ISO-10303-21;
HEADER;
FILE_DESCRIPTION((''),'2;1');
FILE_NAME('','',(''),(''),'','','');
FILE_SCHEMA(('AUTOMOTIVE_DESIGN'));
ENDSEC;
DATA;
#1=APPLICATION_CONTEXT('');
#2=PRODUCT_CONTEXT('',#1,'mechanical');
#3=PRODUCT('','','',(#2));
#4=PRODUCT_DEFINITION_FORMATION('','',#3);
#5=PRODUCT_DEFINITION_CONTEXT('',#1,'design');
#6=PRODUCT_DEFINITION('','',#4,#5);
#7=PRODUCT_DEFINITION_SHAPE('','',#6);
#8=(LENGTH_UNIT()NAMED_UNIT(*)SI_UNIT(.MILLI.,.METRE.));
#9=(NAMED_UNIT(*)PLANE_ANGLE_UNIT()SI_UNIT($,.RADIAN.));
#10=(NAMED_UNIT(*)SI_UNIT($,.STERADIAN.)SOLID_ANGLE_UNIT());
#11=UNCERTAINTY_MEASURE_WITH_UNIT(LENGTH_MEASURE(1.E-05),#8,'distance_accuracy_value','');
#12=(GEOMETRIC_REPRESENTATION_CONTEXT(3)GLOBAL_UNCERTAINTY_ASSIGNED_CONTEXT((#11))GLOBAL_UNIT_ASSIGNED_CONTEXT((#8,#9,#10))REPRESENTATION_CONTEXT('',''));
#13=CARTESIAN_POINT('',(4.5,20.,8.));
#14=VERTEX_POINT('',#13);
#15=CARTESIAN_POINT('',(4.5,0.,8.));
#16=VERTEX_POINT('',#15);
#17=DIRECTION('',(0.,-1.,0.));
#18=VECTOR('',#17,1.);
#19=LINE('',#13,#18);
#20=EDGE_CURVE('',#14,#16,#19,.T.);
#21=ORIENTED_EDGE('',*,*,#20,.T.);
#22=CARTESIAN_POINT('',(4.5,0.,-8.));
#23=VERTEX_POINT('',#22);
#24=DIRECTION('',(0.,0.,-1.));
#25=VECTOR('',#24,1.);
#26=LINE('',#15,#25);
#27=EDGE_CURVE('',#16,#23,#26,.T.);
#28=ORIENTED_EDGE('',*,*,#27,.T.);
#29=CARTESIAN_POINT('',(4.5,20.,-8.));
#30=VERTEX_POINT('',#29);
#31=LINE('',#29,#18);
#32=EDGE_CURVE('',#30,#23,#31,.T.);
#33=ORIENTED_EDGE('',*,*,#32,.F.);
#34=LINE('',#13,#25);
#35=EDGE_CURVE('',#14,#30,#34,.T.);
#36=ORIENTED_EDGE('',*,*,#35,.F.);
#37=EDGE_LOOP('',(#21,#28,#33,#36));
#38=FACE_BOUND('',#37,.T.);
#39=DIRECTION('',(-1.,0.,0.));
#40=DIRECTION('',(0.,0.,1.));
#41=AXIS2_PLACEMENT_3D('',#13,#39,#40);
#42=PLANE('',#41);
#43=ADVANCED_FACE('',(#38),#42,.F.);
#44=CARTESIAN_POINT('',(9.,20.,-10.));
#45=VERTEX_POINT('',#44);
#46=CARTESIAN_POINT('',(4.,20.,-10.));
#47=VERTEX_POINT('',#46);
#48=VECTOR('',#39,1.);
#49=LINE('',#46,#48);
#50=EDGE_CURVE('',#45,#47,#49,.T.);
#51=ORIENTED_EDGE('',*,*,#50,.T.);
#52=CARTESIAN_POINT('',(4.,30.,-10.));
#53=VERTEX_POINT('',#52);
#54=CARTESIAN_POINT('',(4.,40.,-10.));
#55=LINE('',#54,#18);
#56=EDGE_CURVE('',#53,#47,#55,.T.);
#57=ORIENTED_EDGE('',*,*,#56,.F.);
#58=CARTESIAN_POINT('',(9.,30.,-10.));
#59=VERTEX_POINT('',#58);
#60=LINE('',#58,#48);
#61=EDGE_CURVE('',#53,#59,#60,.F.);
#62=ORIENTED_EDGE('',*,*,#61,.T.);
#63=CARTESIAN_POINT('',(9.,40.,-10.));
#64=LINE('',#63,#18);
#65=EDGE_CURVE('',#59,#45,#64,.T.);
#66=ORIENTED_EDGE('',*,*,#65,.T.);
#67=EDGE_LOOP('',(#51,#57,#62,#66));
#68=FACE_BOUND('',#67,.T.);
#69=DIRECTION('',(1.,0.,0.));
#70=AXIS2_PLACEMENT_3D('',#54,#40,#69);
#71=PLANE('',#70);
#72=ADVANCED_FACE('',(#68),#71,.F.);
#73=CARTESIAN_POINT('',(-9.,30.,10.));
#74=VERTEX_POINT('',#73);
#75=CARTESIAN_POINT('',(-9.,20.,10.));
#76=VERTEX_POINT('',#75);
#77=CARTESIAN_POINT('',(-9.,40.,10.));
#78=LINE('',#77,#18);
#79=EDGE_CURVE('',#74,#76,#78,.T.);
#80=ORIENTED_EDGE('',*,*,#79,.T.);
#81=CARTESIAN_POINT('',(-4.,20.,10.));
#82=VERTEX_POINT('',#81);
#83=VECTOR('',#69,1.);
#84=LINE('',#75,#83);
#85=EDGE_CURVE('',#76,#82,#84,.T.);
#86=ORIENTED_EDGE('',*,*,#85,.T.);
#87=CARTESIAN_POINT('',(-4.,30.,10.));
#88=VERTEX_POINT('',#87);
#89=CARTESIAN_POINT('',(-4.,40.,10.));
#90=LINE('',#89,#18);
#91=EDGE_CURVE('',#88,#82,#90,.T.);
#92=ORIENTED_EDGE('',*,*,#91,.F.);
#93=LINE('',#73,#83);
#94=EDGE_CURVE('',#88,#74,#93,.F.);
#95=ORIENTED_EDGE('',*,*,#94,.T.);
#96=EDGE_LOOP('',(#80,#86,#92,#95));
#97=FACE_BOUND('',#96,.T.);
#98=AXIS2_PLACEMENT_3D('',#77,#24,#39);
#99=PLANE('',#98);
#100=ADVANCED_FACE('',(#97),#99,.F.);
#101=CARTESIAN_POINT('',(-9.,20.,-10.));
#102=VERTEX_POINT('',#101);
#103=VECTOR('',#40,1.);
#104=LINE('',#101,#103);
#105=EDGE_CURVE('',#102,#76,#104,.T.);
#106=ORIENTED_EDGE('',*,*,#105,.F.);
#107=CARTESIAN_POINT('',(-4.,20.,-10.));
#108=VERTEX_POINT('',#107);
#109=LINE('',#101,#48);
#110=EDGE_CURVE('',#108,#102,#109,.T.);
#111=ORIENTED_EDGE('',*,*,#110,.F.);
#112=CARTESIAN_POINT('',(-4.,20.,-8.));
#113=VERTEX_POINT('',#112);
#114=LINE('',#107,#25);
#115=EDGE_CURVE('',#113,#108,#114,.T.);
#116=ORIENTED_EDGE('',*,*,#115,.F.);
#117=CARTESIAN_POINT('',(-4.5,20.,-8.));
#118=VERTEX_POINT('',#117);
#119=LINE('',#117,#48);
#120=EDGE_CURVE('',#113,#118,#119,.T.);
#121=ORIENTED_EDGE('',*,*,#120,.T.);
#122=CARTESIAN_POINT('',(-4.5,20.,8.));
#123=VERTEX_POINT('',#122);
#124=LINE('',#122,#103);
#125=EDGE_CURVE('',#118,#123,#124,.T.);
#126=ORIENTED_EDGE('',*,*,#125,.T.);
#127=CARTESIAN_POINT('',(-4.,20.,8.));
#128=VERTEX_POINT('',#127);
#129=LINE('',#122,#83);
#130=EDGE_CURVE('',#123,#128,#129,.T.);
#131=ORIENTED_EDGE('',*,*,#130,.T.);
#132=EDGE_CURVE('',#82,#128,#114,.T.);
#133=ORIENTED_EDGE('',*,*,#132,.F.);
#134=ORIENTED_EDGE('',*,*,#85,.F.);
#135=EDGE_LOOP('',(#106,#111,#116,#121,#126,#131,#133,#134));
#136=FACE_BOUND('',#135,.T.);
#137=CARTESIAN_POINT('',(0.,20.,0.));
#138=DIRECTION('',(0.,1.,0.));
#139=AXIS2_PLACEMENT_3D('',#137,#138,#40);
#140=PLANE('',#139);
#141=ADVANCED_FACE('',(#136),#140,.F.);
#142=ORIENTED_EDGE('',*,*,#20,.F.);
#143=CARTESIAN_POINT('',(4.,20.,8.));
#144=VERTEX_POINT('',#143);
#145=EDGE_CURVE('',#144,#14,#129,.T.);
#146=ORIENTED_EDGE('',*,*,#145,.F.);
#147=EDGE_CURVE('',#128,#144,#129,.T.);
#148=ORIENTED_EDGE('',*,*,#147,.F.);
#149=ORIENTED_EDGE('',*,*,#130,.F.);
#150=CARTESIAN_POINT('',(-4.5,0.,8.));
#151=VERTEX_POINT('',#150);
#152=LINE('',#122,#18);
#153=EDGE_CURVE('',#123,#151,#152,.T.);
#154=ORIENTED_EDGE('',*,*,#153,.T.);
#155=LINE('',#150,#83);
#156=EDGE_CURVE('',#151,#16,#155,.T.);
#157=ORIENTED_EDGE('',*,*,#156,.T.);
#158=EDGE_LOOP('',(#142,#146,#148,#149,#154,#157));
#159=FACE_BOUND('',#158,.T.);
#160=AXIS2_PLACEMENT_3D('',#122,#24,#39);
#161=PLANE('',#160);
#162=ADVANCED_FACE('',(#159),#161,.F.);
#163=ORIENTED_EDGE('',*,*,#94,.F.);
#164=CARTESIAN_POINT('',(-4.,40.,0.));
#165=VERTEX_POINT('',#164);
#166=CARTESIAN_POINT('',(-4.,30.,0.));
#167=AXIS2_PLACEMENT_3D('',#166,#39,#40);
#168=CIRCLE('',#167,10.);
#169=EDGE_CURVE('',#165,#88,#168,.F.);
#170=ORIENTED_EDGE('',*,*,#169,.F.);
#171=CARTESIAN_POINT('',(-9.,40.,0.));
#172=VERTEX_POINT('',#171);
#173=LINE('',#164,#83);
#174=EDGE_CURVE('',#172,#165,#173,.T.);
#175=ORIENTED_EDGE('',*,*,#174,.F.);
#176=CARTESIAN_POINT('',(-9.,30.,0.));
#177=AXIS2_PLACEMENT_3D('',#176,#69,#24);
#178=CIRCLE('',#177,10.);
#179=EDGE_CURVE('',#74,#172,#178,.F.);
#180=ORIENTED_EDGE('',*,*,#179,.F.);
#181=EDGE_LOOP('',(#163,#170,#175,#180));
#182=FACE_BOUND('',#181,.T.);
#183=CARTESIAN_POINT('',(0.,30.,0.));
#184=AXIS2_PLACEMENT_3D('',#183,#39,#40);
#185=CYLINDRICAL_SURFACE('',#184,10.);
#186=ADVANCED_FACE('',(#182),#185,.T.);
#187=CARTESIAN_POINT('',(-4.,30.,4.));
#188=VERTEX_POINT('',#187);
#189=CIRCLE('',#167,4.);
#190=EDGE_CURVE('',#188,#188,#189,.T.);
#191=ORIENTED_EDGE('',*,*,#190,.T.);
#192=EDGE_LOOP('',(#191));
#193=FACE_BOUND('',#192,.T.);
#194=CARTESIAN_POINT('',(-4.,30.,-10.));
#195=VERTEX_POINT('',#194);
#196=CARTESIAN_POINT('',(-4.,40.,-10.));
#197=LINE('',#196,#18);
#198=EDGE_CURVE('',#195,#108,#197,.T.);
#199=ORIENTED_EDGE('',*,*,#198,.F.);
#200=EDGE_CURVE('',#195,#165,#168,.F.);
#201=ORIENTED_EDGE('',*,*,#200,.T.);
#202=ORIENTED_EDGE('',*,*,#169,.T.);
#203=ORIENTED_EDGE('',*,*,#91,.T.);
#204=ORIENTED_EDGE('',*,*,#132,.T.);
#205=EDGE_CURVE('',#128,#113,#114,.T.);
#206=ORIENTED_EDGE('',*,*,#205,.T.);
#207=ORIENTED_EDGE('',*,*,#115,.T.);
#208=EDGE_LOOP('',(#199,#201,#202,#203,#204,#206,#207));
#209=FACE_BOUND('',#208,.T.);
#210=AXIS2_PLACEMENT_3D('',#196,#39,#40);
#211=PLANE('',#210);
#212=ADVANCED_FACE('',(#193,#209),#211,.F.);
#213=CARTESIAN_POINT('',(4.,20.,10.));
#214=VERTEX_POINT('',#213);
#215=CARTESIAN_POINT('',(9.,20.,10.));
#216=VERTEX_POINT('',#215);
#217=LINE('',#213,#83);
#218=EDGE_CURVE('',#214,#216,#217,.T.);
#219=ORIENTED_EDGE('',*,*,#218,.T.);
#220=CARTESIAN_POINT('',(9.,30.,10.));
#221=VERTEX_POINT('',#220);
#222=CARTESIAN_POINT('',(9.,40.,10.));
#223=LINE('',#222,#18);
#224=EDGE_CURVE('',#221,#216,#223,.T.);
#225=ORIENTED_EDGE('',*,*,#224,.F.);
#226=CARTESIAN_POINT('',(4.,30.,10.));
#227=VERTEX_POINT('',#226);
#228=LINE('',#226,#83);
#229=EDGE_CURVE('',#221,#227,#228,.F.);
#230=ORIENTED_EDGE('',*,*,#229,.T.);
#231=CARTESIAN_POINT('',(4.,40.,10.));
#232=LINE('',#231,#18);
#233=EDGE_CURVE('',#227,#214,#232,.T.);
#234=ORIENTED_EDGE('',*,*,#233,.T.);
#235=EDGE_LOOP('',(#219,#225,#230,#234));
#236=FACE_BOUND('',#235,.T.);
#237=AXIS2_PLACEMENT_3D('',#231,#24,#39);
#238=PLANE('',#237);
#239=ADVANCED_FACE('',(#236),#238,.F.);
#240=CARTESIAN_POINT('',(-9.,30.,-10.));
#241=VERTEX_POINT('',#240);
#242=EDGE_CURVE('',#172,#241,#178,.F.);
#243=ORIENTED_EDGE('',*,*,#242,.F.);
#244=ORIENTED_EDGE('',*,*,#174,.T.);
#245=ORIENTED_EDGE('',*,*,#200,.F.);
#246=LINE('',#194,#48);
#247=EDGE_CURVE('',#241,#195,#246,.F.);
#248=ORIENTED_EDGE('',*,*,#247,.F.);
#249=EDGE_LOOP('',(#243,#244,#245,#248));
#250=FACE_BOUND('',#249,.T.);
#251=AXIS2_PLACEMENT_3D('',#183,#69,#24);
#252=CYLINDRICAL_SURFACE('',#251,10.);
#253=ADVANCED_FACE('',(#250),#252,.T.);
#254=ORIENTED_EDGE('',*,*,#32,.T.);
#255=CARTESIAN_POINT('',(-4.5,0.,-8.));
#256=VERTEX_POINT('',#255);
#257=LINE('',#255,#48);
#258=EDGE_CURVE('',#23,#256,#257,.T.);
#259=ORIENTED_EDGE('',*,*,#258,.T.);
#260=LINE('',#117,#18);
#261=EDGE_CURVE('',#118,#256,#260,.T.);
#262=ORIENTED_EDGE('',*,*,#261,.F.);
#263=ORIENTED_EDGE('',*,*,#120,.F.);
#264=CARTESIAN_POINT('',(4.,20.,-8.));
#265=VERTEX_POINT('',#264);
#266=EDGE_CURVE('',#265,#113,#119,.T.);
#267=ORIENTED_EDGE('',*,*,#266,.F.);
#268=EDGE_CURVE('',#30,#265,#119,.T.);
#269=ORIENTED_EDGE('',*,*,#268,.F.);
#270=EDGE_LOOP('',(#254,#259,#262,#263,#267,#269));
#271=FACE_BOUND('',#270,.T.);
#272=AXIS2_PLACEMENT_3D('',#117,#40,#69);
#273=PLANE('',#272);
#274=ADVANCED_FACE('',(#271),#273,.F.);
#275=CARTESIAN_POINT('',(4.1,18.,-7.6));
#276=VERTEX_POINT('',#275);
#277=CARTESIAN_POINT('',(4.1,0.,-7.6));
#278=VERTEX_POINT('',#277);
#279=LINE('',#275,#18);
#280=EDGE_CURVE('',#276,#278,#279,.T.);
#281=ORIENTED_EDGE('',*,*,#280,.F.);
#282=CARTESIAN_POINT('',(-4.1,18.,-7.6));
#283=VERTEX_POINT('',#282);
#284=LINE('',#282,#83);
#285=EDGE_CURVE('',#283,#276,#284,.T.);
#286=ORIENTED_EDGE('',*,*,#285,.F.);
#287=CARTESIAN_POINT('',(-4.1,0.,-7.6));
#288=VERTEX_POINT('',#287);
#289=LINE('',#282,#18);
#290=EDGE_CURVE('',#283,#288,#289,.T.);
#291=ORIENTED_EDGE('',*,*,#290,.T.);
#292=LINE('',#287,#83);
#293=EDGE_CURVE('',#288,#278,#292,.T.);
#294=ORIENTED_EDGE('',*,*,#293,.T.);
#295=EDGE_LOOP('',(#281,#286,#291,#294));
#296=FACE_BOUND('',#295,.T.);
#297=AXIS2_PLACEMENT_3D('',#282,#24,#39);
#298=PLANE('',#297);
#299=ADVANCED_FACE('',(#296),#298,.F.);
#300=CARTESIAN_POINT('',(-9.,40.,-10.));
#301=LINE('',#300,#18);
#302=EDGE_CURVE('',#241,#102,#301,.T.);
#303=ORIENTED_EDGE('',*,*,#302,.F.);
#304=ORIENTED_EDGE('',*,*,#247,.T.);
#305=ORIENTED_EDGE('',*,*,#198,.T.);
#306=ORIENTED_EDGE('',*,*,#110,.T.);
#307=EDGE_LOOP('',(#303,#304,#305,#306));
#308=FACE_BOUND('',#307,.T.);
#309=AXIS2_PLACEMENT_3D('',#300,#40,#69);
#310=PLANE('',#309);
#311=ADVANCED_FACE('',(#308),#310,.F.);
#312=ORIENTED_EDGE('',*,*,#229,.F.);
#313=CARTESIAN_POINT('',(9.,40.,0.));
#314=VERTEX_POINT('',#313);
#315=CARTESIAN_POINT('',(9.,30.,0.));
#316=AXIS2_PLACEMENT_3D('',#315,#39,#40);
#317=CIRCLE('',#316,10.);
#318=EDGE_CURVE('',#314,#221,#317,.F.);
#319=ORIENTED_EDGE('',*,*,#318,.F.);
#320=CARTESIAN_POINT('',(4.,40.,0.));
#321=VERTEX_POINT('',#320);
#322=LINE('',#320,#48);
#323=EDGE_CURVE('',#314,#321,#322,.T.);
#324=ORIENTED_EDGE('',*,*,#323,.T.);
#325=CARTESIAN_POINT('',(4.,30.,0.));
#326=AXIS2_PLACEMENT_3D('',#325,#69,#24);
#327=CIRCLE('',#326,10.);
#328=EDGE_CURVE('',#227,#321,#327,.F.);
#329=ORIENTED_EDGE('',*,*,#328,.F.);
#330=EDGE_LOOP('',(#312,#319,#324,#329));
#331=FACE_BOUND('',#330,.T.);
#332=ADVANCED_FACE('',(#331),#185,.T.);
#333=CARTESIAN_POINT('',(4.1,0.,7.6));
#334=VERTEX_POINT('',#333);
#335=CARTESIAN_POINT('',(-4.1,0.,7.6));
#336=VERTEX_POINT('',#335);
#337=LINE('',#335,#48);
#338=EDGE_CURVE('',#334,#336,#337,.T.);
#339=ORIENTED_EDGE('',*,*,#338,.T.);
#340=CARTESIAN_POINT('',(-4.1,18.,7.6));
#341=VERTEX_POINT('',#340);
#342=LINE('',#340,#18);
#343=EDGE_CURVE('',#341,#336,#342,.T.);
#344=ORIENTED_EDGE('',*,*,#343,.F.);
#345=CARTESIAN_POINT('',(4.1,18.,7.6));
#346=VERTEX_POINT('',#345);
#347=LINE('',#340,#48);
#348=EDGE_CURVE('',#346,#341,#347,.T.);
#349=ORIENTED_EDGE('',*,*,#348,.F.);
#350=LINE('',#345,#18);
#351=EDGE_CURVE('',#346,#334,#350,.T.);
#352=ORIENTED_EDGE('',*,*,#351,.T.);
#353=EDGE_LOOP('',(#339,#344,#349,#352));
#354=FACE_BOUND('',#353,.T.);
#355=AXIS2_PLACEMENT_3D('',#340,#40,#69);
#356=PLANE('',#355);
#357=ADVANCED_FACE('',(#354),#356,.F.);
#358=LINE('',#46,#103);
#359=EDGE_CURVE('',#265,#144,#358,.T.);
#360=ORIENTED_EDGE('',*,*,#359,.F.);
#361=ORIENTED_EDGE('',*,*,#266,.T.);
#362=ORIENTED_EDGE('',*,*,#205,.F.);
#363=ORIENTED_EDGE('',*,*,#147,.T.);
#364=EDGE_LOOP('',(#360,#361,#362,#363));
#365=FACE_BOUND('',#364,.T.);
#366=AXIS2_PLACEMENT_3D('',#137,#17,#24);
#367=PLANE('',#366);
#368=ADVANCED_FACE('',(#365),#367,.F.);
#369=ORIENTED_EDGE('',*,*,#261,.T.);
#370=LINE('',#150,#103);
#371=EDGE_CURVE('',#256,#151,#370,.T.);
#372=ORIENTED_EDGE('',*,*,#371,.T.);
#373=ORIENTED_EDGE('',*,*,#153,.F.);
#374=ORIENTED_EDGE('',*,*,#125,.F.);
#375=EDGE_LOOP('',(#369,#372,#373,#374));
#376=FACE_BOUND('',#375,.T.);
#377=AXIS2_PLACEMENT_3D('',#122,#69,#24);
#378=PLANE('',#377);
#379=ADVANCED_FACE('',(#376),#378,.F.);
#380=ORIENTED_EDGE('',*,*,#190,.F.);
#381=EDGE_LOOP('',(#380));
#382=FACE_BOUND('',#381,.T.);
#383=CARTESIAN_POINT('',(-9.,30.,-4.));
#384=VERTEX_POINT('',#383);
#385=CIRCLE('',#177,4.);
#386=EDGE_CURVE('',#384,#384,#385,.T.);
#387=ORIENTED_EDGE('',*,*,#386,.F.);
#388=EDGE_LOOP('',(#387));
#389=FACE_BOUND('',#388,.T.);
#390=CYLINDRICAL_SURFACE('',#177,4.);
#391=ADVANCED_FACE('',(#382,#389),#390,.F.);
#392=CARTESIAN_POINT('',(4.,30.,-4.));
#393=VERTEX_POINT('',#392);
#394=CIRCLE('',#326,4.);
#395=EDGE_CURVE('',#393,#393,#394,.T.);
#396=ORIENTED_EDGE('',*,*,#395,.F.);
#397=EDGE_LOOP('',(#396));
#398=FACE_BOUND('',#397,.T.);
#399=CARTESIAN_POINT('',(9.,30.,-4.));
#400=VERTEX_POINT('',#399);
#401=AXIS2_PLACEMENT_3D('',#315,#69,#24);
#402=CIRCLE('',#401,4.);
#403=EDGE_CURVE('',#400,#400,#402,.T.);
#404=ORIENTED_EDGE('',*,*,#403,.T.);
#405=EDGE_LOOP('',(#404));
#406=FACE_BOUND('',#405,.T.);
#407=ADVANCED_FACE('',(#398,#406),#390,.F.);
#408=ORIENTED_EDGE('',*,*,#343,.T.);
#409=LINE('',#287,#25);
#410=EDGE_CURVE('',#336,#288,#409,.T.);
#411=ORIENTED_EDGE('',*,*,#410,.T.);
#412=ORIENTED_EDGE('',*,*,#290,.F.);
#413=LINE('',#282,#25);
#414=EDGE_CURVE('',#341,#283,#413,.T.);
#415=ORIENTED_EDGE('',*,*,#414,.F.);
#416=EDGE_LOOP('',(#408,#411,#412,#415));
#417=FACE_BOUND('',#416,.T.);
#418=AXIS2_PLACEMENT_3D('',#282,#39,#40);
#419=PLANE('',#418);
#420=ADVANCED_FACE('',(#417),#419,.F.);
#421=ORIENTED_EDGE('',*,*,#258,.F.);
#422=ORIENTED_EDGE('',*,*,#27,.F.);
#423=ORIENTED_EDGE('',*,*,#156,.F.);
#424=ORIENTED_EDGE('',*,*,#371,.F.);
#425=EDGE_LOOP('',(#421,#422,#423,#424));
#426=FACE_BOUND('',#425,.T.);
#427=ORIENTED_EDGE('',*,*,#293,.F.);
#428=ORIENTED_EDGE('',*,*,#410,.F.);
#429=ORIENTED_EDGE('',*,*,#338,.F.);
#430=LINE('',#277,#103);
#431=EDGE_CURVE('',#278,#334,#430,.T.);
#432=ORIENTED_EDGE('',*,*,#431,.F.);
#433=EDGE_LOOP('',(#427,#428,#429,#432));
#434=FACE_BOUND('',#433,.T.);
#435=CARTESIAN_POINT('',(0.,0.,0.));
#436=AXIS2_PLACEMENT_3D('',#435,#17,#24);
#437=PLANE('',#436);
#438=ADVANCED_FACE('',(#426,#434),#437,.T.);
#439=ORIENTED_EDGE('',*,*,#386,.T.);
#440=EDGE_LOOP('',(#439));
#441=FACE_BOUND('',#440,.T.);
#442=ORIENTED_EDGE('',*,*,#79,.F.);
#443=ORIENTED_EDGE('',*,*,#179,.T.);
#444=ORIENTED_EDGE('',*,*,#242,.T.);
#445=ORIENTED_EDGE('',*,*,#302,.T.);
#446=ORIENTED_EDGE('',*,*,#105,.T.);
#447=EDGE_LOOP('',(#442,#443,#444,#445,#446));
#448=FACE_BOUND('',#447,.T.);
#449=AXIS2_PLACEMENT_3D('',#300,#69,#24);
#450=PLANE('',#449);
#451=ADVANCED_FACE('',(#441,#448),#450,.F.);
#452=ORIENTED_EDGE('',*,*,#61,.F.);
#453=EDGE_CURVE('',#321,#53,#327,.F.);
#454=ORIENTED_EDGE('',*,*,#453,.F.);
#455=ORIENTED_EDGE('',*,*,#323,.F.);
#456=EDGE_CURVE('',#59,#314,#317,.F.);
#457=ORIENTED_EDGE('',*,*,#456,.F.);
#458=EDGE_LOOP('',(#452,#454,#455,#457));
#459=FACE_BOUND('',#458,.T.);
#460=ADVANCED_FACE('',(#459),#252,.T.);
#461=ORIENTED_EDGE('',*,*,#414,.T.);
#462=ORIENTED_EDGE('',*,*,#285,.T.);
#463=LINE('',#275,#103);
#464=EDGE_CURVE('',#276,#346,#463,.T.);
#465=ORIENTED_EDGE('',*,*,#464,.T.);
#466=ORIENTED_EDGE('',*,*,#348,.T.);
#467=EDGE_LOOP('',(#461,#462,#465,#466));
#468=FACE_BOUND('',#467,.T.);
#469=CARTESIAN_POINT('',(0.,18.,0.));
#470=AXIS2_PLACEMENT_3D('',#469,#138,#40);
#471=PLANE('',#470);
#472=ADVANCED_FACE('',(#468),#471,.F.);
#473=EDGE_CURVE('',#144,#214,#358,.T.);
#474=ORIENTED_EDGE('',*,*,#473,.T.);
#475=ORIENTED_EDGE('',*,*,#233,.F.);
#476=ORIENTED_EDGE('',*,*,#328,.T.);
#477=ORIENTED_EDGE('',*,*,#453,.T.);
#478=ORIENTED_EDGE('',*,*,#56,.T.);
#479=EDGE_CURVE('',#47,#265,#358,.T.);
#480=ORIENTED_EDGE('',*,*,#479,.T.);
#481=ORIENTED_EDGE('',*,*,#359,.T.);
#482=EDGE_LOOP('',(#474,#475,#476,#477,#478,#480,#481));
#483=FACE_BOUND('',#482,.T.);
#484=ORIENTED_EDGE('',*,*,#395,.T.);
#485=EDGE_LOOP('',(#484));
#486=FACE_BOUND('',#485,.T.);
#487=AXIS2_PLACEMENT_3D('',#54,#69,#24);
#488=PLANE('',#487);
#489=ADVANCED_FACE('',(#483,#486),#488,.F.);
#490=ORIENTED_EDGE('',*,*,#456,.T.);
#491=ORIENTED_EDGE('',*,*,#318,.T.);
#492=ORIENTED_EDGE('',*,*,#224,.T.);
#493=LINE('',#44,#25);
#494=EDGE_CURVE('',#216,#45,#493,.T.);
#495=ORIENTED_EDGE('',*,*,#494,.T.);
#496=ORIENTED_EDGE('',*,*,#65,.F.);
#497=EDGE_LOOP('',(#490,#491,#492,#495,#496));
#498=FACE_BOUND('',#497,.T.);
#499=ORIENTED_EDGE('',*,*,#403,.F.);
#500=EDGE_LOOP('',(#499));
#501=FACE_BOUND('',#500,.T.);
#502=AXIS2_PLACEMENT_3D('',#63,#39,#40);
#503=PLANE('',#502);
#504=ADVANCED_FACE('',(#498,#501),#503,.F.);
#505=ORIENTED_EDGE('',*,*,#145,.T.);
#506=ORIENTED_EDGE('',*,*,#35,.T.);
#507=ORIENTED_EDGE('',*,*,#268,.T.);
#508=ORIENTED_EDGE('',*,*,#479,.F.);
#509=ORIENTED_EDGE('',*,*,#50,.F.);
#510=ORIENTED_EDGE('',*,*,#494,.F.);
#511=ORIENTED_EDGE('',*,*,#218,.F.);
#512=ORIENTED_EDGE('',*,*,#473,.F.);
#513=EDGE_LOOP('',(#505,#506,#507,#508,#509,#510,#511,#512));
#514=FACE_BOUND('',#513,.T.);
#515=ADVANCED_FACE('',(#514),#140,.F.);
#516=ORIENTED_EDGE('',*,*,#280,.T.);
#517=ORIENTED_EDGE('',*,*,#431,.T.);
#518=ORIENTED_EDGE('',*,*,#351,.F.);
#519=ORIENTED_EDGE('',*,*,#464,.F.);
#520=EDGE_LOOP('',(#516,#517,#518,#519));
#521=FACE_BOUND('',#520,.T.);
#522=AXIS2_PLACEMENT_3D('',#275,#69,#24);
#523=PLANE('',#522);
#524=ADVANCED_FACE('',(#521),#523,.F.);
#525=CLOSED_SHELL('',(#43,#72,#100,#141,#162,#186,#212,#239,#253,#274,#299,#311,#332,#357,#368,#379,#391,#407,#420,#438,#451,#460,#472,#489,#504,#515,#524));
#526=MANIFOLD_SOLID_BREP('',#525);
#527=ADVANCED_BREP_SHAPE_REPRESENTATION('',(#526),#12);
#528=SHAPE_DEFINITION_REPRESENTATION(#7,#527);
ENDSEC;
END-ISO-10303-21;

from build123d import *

# Parameters (mm, degrees)
SKETCH1_W           = 9
SKETCH1_H           = 16
BOSS_EXTRUDE1_DEPTH = 20
SKETCH2_W           = 8.2
SKETCH2_H           = 15.2
CUT_EXTRUDE1_DEPTH  = 18
SKETCH4_W           = 5
SKETCH4_H           = 20
BOSS_EXTRUDE2_DEPTH = 20
SKETCH5_R           = 4
CUT_EXTRUDE2_DEPTH  = 45.988887517
FILLET1_R           = 10


with BuildPart() as part:
    # Sketch1 → Boss-Extrude1 (new body)
    with BuildSketch(Plane(origin=(0, 0, 0), x_dir=(1, 0, 0), z_dir=(0, 1, 0))):
        Rectangle(SKETCH1_W, SKETCH1_H)
    extrude(amount=BOSS_EXTRUDE1_DEPTH)

    # Sketch2 → Cut-Extrude1 (cut)
    with BuildSketch(Plane.XZ):
        Rectangle(SKETCH2_W, SKETCH2_H)
    extrude(amount=-CUT_EXTRUDE1_DEPTH, mode=Mode.SUBTRACT)

    # Sketch4 → Boss-Extrude2 (add)
    with BuildSketch(Plane(origin=(0, 20, 0), x_dir=(1, 0, 0), z_dir=(0, 1, 0))):
        with Locations((6.5, 0)):
            Rectangle(SKETCH4_W, SKETCH4_H)
        with Locations((-6.5, 0)):
            Rectangle(SKETCH4_W, SKETCH4_H)
    extrude(amount=BOSS_EXTRUDE2_DEPTH)

    # Sketch5 → Cut-Extrude2 (cut, through all)
    with BuildSketch(Plane(origin=(9, 0, 0), x_dir=(0, 0, -1), z_dir=(1, 0, 0))):
        with Locations((0, 30)):
            Circle(SKETCH5_R)
    extrude(amount=-CUT_EXTRUDE2_DEPTH, mode=Mode.SUBTRACT)

    # Fillet1
    fillet1_edges = [part.edges().sort_by_distance(p)[0] for p in [
        (6.5, 40, 10),
        (6.5, 40, -10),
        (-6.5, 40, -10),
        (-6.5, 40, 10),
    ]]
    fillet(fillet1_edges, radius=FILLET1_R - 0.0001)  # a hair under: the kernel refuses the full size


solid = part.part
